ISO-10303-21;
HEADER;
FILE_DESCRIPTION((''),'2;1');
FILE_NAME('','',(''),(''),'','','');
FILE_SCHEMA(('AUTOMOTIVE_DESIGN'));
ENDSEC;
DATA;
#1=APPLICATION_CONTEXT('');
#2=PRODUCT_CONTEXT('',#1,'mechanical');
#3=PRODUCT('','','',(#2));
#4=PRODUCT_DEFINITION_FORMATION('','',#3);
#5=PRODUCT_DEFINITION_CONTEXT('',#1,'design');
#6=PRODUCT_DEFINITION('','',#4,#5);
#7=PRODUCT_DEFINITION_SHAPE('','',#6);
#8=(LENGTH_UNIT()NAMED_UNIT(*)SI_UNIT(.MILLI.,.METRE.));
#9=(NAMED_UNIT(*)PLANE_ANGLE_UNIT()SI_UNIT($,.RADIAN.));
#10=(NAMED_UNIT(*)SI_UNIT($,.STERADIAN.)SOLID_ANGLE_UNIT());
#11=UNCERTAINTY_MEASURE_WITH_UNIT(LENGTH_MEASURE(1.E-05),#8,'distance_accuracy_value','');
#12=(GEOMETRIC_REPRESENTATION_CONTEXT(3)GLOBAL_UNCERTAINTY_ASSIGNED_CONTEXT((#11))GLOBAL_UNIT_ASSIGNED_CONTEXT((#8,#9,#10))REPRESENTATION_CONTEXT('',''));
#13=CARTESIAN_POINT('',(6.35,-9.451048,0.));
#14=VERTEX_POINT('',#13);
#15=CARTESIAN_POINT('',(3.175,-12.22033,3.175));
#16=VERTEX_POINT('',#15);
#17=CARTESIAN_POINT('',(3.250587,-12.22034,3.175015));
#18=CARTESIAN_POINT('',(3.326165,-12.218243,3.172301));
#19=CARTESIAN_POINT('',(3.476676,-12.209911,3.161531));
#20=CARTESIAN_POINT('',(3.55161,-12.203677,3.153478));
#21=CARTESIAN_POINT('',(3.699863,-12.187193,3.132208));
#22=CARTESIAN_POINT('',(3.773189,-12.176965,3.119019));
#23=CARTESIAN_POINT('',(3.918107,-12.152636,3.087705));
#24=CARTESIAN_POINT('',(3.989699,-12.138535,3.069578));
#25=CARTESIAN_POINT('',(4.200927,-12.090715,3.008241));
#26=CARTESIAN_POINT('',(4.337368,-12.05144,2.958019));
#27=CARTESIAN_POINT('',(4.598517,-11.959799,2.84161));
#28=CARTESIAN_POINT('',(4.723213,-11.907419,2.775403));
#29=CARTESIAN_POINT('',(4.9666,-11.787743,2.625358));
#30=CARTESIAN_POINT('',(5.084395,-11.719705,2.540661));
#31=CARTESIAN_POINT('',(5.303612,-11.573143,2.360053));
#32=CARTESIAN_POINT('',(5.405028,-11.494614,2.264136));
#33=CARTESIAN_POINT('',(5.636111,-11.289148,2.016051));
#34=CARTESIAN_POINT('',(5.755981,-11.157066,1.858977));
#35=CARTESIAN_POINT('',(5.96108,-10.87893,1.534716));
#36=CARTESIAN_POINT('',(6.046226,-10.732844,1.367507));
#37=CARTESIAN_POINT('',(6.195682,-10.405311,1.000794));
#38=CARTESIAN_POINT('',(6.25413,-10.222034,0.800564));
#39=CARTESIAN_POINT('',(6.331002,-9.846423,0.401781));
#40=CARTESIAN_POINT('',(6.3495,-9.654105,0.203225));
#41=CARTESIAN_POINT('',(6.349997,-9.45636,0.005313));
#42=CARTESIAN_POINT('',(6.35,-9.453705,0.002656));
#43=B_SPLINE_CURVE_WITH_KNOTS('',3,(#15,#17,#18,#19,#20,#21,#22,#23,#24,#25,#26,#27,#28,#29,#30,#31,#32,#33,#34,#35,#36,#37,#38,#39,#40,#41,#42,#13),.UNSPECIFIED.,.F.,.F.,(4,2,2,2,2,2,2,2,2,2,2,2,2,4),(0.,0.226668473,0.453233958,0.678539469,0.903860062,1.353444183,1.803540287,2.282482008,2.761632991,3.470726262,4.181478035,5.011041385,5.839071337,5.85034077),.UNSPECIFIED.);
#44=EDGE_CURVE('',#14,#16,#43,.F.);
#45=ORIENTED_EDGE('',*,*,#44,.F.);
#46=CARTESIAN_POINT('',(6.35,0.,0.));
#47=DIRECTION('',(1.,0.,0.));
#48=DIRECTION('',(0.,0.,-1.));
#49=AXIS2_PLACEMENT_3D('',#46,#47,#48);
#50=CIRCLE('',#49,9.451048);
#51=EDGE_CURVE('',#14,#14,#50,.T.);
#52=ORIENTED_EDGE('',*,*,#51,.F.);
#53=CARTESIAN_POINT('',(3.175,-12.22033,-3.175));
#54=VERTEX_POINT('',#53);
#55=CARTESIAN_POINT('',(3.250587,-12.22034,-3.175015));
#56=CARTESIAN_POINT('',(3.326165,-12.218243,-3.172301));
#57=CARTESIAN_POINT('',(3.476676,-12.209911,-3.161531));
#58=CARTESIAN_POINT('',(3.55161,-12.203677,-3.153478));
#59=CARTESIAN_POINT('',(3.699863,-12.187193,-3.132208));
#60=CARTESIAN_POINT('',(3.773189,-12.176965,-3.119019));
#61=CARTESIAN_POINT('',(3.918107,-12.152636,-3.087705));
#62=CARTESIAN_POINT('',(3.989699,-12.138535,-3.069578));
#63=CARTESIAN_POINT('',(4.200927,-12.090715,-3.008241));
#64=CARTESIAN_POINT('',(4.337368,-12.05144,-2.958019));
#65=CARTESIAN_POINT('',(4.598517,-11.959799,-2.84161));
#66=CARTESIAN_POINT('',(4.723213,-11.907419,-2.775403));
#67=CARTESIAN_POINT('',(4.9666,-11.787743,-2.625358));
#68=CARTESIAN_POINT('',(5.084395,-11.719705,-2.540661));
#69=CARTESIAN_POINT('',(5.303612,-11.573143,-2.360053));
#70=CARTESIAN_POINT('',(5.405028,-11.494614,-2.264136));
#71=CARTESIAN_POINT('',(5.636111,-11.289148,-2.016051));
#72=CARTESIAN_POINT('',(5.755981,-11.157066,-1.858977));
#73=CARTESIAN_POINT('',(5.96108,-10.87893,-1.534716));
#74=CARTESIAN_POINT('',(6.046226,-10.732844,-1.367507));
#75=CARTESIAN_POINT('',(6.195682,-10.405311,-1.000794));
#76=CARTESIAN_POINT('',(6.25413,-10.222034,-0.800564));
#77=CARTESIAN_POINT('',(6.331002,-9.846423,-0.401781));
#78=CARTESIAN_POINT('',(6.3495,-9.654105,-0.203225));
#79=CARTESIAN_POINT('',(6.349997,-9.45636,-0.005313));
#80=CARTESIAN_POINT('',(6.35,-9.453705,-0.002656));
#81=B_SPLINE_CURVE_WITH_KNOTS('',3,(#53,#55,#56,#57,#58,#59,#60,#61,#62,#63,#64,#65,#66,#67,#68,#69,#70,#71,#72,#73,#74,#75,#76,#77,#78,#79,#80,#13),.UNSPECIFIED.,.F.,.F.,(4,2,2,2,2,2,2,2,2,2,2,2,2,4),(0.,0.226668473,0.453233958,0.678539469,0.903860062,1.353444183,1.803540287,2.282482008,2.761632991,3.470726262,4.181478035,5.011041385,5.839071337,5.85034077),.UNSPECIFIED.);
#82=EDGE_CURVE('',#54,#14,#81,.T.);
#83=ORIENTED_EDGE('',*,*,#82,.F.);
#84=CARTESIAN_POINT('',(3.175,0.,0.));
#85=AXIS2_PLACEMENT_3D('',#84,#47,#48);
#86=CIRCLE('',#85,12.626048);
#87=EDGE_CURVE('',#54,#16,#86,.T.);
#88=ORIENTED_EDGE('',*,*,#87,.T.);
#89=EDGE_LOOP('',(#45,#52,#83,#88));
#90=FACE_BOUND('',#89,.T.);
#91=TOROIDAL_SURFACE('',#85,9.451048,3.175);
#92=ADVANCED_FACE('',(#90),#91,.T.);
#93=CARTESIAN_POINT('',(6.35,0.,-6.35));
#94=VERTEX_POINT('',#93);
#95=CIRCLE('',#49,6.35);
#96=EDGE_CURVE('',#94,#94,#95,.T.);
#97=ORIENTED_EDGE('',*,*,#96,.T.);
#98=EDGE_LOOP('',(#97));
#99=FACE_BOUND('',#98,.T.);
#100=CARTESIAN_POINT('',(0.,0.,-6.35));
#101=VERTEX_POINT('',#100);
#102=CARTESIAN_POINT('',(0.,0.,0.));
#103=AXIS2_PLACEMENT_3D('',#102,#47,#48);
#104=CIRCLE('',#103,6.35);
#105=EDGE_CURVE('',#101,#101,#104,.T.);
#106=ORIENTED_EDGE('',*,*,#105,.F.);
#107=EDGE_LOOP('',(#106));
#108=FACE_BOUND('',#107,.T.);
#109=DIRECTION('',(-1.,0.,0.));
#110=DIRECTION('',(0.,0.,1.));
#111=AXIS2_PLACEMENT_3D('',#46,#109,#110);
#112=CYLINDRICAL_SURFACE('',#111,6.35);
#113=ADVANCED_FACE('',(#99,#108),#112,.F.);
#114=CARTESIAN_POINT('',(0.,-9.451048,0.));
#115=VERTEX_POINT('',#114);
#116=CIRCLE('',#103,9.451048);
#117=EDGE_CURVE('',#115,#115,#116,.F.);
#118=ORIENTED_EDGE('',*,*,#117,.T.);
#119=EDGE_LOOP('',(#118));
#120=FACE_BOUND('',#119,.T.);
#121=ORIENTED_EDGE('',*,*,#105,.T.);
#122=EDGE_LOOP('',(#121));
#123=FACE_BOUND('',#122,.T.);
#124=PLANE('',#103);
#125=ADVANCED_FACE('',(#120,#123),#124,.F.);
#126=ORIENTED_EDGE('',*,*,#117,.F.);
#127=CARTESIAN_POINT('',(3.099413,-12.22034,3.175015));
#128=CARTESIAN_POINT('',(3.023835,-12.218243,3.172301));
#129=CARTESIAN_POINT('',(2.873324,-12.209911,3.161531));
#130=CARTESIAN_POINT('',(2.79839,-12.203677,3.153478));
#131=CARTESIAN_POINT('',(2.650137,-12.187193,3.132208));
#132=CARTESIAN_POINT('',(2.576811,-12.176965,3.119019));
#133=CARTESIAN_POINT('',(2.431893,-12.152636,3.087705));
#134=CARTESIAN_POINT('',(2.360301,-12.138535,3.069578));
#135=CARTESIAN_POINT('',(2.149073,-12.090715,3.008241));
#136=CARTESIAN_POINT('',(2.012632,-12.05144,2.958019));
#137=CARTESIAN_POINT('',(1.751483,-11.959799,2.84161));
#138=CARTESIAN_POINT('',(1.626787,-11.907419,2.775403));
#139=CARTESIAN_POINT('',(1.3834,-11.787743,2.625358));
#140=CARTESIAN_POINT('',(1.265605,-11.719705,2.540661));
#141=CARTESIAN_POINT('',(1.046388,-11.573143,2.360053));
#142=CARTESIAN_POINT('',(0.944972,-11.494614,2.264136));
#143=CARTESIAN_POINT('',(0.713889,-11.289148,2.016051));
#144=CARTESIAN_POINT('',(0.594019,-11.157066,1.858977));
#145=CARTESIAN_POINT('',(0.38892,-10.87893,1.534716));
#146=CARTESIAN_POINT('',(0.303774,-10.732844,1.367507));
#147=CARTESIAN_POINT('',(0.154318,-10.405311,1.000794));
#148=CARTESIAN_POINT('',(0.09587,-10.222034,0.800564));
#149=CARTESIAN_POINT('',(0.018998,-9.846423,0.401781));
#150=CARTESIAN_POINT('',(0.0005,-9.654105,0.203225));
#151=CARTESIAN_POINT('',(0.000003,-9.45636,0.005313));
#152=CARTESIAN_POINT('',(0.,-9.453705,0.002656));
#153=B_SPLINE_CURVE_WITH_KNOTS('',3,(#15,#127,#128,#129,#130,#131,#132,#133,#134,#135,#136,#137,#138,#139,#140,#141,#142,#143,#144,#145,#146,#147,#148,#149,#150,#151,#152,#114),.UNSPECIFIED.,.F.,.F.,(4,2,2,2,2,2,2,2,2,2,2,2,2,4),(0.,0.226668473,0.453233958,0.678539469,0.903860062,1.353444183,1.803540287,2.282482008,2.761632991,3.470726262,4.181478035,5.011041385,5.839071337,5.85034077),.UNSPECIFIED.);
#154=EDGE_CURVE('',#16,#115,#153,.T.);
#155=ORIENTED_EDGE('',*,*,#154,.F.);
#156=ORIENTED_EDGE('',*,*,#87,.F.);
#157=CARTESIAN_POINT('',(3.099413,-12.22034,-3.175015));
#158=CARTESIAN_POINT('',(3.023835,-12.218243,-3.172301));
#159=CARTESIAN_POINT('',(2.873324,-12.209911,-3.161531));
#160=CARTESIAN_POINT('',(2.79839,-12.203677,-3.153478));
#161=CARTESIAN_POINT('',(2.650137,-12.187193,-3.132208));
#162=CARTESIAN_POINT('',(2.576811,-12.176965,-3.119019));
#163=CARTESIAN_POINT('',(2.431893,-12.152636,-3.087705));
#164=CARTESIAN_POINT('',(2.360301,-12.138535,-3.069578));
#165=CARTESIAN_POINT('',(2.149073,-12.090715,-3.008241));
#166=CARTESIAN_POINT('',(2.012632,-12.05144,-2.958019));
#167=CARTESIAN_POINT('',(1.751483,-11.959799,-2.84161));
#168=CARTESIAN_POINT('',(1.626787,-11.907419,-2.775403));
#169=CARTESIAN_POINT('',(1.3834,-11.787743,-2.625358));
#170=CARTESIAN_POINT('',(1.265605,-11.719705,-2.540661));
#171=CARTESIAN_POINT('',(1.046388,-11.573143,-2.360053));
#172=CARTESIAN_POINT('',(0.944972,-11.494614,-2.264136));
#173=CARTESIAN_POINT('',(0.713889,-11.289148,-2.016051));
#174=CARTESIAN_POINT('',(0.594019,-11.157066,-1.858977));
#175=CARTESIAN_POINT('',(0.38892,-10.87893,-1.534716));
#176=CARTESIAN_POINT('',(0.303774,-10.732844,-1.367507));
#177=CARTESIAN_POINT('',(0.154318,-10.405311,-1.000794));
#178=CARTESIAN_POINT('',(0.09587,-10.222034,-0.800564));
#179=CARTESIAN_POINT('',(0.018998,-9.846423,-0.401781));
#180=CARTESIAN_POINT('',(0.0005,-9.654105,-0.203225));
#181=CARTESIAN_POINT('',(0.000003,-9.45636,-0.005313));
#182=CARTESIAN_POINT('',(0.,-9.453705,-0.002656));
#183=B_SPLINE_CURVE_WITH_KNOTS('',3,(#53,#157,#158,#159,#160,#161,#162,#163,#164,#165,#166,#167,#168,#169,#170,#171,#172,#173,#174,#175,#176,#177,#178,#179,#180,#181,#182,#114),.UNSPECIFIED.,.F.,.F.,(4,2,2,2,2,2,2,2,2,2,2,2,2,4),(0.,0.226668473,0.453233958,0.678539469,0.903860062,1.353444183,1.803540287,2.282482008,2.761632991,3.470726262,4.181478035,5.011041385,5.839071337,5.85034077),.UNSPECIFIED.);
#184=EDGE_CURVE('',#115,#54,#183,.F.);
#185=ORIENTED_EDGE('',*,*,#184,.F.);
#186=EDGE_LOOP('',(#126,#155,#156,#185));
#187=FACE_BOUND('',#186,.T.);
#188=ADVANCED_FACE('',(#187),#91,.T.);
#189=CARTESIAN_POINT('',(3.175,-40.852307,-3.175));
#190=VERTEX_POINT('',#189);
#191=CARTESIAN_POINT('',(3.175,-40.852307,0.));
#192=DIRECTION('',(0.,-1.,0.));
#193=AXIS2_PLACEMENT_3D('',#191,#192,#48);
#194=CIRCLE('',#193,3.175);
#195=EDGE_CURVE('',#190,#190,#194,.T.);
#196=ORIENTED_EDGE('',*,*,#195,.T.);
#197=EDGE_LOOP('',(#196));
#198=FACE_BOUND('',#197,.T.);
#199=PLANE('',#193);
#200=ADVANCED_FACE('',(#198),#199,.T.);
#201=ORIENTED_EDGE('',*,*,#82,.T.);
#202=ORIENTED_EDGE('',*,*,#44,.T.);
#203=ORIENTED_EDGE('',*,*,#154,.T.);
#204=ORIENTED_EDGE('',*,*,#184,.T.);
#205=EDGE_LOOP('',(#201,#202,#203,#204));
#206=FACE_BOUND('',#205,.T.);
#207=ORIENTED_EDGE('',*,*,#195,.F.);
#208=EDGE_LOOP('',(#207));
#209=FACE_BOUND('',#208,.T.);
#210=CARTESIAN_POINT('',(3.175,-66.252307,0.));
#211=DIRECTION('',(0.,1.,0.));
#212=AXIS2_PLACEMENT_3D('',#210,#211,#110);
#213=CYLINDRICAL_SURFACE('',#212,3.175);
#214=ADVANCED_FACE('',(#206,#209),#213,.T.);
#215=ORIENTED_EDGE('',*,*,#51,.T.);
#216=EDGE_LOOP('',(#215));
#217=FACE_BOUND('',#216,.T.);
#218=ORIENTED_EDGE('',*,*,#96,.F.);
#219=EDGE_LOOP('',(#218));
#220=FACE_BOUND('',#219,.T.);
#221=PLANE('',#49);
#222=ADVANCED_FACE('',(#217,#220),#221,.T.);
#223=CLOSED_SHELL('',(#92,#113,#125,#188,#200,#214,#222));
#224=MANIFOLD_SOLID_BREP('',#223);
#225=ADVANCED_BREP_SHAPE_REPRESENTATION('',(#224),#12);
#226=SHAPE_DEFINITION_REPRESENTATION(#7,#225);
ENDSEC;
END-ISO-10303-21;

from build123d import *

# Parameters (mm, degrees)
SKETCH1_R           = 12.626048476
SKETCH1_R_2         = 6.35
BOSS_EXTRUDE1_DEPTH = 6.35
BOSS_EXTRUDE2_DEPTH = 6.35
SKETCH4_R           = 3.175
BOSS_EXTRUDE3_DEPTH = 50.8
CUT_EXTRUDE1_START  = -6.35
CUT_EXTRUDE1_DEPTH  = 6.35
SKETCH7_R           = 3.175
BOSS_EXTRUDE4_DEPTH = 57.15
SKETCH7_2_R         = 3.175
CUT_EXTRUDE2_DEPTH  = 25.4
FILLET1_R           = 3.175


with BuildPart() as part:
    # Sketch1 → Boss-Extrude1 (new body)
    with BuildSketch(Plane(origin=(0, 0, 0), x_dir=(0, 0, -1), z_dir=(1, 0, 0))):
        Circle(SKETCH1_R)
        Circle(SKETCH1_R_2, mode=Mode.SUBTRACT)
    extrude(amount=BOSS_EXTRUDE1_DEPTH)

    # Sketch3 → Boss-Extrude2 (add)
    with BuildSketch(Plane(origin=(6.35, 0, 0), x_dir=(0, 0, -1), z_dir=(1, 0, 0))):
        Polygon((-8.994798287, -8.860626609), (-8.994798287, -15.452306957), (10.798615768, -15.452306957), (10.798615768, -6.542705681), (-8.994798287, -6.542705681), align=None)
    extrude(amount=-BOSS_EXTRUDE2_DEPTH)

    # Sketch4 → Boss-Extrude3 (add)
    with BuildSketch(Plane.XZ.offset(15.452306957)):
        with Locations(Location((3.175, 0, 0), (0, 0, 180))):
            Circle(SKETCH4_R)
    extrude(amount=BOSS_EXTRUDE3_DEPTH)

    # Sketch5 → Cut-Extrude1 (cut)
    with BuildSketch(Plane(origin=(6.35, 0, 0), x_dir=(0, 0, -1), z_dir=(1, 0, 0)).offset(CUT_EXTRUDE1_START)):
        with BuildLine():
            Line((-8.994798287, -8.860626609), (-8.994798287, -15.452306957))
            Line((-8.994798287, -15.452306957), (10.798615768, -15.452306957))
            Line((10.798615768, -15.452306957), (10.798615768, -6.542705681))
            ThreePointArc((10.798615768, -6.542705681), (1.46854647, -12.540353719), (-8.994798287, -8.860626609))
        make_face()
    extrude(amount=CUT_EXTRUDE1_DEPTH, mode=Mode.SUBTRACT)


with BuildPart() as cut_extrude1_piece_1:
    # of the separate pieces the step leaves, piece 1, a body of its own (cut_extrude1_pieces)
    add(part.part.solids().sort_by_distance((0, -6.542705681, -10.798615768))[0])



with BuildPart() as cut_extrude1_piece_2:
    # of the separate pieces the step leaves, piece 2, a body of its own (cut_extrude1_pieces)
    add(part.part.solids().sort_by_distance((0, -15.452306957, 0))[0])


with BuildPart() as cut_extrude1_piece_1_1:
    add(cut_extrude1_piece_1.part)

    add(cut_extrude1_piece_2.part)  # Boss-Extrude4 merges Cut-Extrude1 piece 2
    # Sketch7 → Boss-Extrude4 (add)
    with BuildSketch(Plane.XZ.offset(66.252306957)):
        with Locations((3.175, 0)):
            Circle(SKETCH7_R)
    extrude(amount=-BOSS_EXTRUDE4_DEPTH)

    # Sketch7<2> → Cut-Extrude2 (cut)
    with BuildSketch(Plane.XZ.offset(66.252306957)):
        with Locations((3.175, 0)):
            Circle(SKETCH7_2_R)
    extrude(amount=-CUT_EXTRUDE2_DEPTH, mode=Mode.SUBTRACT)

    # Fillet1
    # the kernel refuses this fillet: 3.175 mm, written as the material it takes off along each edge
    with BuildSketch(Plane(origin=(6.35, 0, 0), x_dir=(0, -0.7017735299957855, 0.7124001071008161), z_dir=(0, -0.7124001071008161, -0.7017735299957855))) as fillet1_piece_1:
        with BuildLine():
            CenterArc((12.626048476 - FILLET1_R, FILLET1_R), FILLET1_R, 270, 90)
            Line((12.626048476 - FILLET1_R, 0), (12.626048476, 0))
            Line((12.626048476, 0), (12.626048476, FILLET1_R))
        make_face()
    revolve(axis=Axis((6.35, 0, 0), (-1, 0, 0)), revolution_arc=255.78045899, mode=Mode.SUBTRACT)
    with BuildSketch(Plane(origin=(0, 0, 0), x_dir=(0, -0.5181910787843432, -0.855264874684047), z_dir=(0, -0.855264874684047, 0.5181910787843432))) as fillet1_piece_2:
        with BuildLine():
            CenterArc((12.626048476 - FILLET1_R, FILLET1_R), FILLET1_R, 270, 90)
            Line((12.626048476 - FILLET1_R, 0), (12.626048476, 0))
            Line((12.626048476, 0), (12.626048476, FILLET1_R))
        make_face()
    revolve(axis=Axis((0, 0, 0), (1, 0, 0)), revolution_arc=255.78045899, mode=Mode.SUBTRACT)
    with BuildSketch(Plane(origin=(0, 0, 0), x_dir=(0, -0.5181910787843435, -0.8552648746840469), z_dir=(0, 0.8552648746840469, -0.5181910787843435))) as fillet1_piece_3_section:
        with BuildLine():
            CenterArc((12.626048476 - FILLET1_R, -FILLET1_R), FILLET1_R, 0, 90)
            Line((12.626048476 - FILLET1_R, 0), (12.626048476, 0))
            Line((12.626048476, 0), (12.626048476, -FILLET1_R))
        make_face()
    fillet1_piece_3 = revolve(axis=Axis((0, 0, 0), (-1, 0, 0)), revolution_arc=58.789009325, mode=Mode.PRIVATE)
    fillet1_piece_3 = fillet1_piece_3 - Plane(origin=(3.175, -9.611252213, 0), x_dir=(1, 0, 0), z_dir=(0, -1, 0)) * Cylinder(3.175, 51, mode=Mode.PRIVATE)
    add(fillet1_piece_3, mode=Mode.SUBTRACT)
    with BuildSketch(Plane(origin=(0, 0, 0), x_dir=(0, -1, 0), z_dir=(0, 0, -1))) as fillet1_piece_4_section:
        with BuildLine():
            CenterArc((12.626048476 - FILLET1_R, -FILLET1_R), FILLET1_R, 0, 90)
            Line((12.626048476 - FILLET1_R, 0), (12.626048476, 0))
            Line((12.626048476, 0), (12.626048476, -FILLET1_R))
        make_face()
    fillet1_piece_4 = revolve(axis=Axis((0, 0, 0), (-1, 0, 0)), revolution_arc=45.430531685, mode=Mode.PRIVATE)
    fillet1_piece_4 = fillet1_piece_4 - Plane(origin=(3.175, -10.439695548, 0), x_dir=(1, 0, 0), z_dir=(0, -1, 0)) * Cylinder(3.175, 51, mode=Mode.PRIVATE)
    add(fillet1_piece_4, mode=Mode.SUBTRACT)
    with BuildSketch(Plane(origin=(6.35, 0, 0), x_dir=(0, -1, 0), z_dir=(0, 0, -1))) as fillet1_piece_5_section:
        with BuildLine():
            CenterArc((12.626048476 - FILLET1_R, FILLET1_R), FILLET1_R, 270, 90)
            Line((12.626048476 - FILLET1_R, 0), (12.626048476, 0))
            Line((12.626048476, 0), (12.626048476, FILLET1_R))
        make_face()
    fillet1_piece_5 = revolve(axis=Axis((6.35, 0, 0), (-1, 0, 0)), revolution_arc=45.430531685, mode=Mode.PRIVATE)
    fillet1_piece_5 = fillet1_piece_5 - Plane(origin=(3.175, -10.439696502, 0), x_dir=(1, 0, 0), z_dir=(0, -1, 0)) * Cylinder(3.175, 51, mode=Mode.PRIVATE)
    add(fillet1_piece_5, mode=Mode.SUBTRACT)
    with BuildSketch(Plane(origin=(6.35, 0, 0), x_dir=(0, -0.5181910787843435, -0.8552648746840469), z_dir=(0, 0.8552648746840469, -0.5181910787843435))) as fillet1_piece_6_section:
        with BuildLine():
            CenterArc((12.626048476 - FILLET1_R, FILLET1_R), FILLET1_R, 270, 90)
            Line((12.626048476 - FILLET1_R, 0), (12.626048476, 0))
            Line((12.626048476, 0), (12.626048476, FILLET1_R))
        make_face()
    fillet1_piece_6 = revolve(axis=Axis((6.35, 0, 0), (-1, 0, 0)), revolution_arc=58.789009325, mode=Mode.PRIVATE)
    fillet1_piece_6 = fillet1_piece_6 - Plane(origin=(3.175, -9.611252422, 0), x_dir=(1, 0, 0), z_dir=(0, -1, 0)) * Cylinder(3.175, 51, mode=Mode.PRIVATE)
    add(fillet1_piece_6, mode=Mode.SUBTRACT)


solid = cut_extrude1_piece_1_1.part
